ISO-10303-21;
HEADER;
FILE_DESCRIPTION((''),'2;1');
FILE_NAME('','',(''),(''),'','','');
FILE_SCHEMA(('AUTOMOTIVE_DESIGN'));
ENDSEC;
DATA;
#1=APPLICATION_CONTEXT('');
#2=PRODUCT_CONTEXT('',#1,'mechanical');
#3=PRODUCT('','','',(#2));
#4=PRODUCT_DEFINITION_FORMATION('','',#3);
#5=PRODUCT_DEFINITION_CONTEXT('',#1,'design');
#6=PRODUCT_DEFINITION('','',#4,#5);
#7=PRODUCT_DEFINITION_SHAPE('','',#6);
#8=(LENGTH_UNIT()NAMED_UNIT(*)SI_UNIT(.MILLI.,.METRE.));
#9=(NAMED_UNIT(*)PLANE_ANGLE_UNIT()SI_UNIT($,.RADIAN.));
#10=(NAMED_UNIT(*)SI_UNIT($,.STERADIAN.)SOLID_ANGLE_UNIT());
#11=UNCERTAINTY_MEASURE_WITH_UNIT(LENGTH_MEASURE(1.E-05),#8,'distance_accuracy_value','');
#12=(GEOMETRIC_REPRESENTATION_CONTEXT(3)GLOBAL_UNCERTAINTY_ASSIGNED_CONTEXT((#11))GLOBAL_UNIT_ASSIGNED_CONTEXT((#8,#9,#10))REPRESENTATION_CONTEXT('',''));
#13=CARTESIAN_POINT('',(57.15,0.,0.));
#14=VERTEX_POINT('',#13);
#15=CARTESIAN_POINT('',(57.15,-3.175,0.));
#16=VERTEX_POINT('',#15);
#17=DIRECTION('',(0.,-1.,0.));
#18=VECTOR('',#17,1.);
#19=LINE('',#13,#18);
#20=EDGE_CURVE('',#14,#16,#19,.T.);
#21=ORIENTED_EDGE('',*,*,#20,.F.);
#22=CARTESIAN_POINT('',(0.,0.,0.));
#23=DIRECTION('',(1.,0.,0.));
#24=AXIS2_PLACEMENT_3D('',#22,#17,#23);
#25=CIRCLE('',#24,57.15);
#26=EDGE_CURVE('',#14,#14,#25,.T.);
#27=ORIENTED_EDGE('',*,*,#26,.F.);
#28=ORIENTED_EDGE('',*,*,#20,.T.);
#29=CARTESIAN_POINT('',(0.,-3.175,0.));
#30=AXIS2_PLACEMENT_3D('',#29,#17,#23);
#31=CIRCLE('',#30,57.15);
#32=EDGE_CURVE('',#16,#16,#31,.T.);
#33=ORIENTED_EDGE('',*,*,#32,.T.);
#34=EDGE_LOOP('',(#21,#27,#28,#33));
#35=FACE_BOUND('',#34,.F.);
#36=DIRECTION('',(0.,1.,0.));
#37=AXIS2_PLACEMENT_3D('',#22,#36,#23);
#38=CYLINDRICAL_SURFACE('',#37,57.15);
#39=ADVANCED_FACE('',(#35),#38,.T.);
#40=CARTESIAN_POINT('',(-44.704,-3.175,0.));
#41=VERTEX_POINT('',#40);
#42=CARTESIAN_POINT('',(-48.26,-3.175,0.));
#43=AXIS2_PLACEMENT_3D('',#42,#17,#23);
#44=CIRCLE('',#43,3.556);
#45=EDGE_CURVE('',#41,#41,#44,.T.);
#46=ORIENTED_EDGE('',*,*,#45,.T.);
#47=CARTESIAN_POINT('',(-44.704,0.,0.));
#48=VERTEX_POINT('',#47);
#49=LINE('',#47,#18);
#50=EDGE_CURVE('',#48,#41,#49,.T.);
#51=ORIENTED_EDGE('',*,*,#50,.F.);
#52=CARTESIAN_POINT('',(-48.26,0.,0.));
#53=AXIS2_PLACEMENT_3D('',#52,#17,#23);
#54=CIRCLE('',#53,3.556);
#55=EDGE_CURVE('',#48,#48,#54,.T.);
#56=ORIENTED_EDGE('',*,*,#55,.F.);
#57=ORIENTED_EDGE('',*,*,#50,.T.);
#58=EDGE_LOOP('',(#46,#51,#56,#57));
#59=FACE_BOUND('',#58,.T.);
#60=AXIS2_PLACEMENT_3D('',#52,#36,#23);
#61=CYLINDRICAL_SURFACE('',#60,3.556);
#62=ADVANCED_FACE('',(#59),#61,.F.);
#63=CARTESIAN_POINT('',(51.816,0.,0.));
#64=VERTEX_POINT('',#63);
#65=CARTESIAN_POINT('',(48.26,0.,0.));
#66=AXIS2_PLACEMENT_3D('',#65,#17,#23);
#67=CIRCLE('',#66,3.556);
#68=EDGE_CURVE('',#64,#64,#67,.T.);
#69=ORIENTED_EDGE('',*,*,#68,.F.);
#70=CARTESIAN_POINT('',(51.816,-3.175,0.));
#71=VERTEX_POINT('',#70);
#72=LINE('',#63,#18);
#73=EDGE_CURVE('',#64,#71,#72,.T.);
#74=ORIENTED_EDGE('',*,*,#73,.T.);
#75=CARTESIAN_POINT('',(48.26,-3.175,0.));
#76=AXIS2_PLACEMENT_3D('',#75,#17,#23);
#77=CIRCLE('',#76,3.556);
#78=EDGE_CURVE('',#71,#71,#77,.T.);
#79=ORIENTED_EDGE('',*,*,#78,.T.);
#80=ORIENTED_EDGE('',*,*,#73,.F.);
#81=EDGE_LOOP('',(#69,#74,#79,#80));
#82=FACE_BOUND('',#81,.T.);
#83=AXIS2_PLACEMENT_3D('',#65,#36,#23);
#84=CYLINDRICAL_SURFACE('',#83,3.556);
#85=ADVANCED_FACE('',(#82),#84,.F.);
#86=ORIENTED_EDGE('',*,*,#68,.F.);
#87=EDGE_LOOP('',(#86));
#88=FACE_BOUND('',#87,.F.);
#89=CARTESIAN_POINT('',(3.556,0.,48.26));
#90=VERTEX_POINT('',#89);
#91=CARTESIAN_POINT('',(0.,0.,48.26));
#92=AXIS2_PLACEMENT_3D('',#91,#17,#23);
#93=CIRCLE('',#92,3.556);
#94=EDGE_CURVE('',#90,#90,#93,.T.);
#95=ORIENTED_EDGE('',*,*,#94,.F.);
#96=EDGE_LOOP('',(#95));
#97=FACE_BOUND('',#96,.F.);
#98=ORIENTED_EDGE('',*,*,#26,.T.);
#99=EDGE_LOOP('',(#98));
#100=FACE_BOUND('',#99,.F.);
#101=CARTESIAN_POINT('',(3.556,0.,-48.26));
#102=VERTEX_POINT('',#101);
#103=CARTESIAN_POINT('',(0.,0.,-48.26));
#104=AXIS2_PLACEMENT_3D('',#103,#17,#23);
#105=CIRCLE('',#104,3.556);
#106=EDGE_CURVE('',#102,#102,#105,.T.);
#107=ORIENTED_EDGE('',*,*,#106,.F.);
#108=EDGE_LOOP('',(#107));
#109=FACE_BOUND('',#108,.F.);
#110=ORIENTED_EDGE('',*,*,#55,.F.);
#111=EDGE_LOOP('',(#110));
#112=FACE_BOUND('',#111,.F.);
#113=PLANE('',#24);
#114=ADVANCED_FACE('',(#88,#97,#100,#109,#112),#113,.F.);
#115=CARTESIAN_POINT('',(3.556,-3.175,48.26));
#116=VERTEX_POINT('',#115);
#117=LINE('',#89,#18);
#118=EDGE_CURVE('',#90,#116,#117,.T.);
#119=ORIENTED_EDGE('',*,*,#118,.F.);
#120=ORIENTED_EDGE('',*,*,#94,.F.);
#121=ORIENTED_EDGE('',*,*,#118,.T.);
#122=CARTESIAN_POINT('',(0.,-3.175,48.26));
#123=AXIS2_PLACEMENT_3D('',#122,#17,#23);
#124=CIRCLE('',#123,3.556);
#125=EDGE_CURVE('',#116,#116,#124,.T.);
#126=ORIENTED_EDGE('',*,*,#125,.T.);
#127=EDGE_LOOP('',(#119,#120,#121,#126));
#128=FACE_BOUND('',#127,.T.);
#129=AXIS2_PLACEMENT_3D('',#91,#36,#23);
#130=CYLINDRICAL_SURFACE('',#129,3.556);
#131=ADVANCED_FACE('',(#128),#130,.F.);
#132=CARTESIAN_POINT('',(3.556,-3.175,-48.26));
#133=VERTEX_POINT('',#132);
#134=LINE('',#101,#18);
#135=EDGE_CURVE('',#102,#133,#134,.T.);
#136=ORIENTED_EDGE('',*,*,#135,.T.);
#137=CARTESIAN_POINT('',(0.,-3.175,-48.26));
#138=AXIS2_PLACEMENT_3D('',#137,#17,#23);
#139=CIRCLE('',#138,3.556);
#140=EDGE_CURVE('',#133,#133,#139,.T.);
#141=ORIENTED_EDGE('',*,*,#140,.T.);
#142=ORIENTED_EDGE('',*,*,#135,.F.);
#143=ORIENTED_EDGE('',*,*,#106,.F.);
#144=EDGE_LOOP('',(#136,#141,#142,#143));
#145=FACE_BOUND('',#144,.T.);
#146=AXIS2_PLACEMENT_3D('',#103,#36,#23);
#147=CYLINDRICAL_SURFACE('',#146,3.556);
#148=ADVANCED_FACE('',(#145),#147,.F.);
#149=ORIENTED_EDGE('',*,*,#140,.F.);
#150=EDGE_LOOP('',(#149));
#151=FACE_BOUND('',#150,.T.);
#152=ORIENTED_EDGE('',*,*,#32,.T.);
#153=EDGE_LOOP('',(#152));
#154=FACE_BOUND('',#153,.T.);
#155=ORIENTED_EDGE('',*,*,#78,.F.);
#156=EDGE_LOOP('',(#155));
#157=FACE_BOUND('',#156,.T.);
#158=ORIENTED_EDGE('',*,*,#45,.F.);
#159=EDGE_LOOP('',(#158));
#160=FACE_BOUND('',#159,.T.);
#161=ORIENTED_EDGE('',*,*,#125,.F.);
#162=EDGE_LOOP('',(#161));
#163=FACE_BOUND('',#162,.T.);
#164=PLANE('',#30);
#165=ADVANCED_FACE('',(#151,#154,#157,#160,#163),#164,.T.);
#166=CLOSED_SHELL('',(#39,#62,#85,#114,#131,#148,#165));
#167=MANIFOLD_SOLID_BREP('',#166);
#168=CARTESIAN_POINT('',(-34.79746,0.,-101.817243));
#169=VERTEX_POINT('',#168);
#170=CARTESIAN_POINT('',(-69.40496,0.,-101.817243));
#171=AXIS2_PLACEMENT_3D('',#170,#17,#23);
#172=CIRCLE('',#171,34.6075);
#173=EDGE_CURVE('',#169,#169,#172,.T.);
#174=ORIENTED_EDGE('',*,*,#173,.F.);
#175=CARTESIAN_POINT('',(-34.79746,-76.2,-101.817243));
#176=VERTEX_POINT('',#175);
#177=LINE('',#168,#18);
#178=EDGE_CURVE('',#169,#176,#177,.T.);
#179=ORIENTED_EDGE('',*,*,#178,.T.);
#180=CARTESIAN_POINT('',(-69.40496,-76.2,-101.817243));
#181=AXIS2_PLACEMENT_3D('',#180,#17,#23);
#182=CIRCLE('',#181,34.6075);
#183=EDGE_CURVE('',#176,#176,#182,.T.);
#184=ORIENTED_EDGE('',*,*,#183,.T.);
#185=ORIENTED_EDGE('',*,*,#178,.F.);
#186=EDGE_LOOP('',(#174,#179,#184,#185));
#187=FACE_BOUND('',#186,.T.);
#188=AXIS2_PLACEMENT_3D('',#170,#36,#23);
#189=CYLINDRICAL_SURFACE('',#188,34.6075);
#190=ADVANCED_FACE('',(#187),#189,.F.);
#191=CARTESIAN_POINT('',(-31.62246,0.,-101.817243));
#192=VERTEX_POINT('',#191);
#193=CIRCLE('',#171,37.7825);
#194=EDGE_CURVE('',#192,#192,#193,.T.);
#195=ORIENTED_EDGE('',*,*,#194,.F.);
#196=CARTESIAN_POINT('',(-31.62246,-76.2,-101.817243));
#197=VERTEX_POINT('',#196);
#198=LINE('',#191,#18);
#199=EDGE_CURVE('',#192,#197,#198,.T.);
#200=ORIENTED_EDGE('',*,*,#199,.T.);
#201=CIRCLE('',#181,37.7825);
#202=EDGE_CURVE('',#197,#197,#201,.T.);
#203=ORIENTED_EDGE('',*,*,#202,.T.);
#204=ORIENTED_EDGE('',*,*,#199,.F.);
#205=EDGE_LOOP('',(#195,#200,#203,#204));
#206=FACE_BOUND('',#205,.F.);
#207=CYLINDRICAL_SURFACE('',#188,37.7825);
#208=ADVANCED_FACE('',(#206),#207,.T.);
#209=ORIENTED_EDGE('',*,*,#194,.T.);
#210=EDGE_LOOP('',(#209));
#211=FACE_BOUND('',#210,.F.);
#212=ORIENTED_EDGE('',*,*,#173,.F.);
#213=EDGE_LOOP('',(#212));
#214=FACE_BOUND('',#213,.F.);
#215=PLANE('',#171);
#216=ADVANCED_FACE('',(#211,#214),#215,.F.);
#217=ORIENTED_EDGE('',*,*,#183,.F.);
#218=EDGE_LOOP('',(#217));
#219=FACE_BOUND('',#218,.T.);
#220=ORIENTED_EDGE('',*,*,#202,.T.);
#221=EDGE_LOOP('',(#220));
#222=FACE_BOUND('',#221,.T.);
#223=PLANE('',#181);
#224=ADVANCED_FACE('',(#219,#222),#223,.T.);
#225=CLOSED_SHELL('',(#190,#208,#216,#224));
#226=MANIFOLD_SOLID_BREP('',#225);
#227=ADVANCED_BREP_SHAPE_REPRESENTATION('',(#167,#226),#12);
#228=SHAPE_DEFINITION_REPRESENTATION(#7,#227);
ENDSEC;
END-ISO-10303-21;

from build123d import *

# Parameters (mm, degrees)
F0_R     = 57.15
F0_R_2   = 3.556
F1_DEPTH = 3.175
F2_R     = 37.7825
F2_R_2   = 34.6075
F3_DEPTH = 76.2


# Not quite as in the source:
# - a feature names something its author has since deleted; it is built from what else it names


with BuildPart() as f1:
    # F0 (on Front) → F1 (new body)
    with BuildSketch(Plane.XZ):
        Circle(F0_R)
        with Locations((0, -48.26)):
            Circle(F0_R_2, mode=Mode.SUBTRACT)
        with Locations((-48.26, 0)):
            Circle(F0_R_2, mode=Mode.SUBTRACT)
        with Locations((48.26, 0)):
            Circle(F0_R_2, mode=Mode.SUBTRACT)
        with Locations((0, 48.26)):
            Circle(F0_R_2, mode=Mode.SUBTRACT)
    extrude(amount=F1_DEPTH)


with BuildPart() as f3:
    # F2 (on Front) → F3 (new body)
    with BuildSketch(Plane.XZ):
        with Locations((-69.4049596786, -101.8172428012)):
            Circle(F2_R)
        with Locations((-69.4049596786, -101.8172428012)):
            Circle(F2_R_2, mode=Mode.SUBTRACT)
    extrude(amount=F3_DEPTH)


solid = Compound([f1.part, f3.part])
